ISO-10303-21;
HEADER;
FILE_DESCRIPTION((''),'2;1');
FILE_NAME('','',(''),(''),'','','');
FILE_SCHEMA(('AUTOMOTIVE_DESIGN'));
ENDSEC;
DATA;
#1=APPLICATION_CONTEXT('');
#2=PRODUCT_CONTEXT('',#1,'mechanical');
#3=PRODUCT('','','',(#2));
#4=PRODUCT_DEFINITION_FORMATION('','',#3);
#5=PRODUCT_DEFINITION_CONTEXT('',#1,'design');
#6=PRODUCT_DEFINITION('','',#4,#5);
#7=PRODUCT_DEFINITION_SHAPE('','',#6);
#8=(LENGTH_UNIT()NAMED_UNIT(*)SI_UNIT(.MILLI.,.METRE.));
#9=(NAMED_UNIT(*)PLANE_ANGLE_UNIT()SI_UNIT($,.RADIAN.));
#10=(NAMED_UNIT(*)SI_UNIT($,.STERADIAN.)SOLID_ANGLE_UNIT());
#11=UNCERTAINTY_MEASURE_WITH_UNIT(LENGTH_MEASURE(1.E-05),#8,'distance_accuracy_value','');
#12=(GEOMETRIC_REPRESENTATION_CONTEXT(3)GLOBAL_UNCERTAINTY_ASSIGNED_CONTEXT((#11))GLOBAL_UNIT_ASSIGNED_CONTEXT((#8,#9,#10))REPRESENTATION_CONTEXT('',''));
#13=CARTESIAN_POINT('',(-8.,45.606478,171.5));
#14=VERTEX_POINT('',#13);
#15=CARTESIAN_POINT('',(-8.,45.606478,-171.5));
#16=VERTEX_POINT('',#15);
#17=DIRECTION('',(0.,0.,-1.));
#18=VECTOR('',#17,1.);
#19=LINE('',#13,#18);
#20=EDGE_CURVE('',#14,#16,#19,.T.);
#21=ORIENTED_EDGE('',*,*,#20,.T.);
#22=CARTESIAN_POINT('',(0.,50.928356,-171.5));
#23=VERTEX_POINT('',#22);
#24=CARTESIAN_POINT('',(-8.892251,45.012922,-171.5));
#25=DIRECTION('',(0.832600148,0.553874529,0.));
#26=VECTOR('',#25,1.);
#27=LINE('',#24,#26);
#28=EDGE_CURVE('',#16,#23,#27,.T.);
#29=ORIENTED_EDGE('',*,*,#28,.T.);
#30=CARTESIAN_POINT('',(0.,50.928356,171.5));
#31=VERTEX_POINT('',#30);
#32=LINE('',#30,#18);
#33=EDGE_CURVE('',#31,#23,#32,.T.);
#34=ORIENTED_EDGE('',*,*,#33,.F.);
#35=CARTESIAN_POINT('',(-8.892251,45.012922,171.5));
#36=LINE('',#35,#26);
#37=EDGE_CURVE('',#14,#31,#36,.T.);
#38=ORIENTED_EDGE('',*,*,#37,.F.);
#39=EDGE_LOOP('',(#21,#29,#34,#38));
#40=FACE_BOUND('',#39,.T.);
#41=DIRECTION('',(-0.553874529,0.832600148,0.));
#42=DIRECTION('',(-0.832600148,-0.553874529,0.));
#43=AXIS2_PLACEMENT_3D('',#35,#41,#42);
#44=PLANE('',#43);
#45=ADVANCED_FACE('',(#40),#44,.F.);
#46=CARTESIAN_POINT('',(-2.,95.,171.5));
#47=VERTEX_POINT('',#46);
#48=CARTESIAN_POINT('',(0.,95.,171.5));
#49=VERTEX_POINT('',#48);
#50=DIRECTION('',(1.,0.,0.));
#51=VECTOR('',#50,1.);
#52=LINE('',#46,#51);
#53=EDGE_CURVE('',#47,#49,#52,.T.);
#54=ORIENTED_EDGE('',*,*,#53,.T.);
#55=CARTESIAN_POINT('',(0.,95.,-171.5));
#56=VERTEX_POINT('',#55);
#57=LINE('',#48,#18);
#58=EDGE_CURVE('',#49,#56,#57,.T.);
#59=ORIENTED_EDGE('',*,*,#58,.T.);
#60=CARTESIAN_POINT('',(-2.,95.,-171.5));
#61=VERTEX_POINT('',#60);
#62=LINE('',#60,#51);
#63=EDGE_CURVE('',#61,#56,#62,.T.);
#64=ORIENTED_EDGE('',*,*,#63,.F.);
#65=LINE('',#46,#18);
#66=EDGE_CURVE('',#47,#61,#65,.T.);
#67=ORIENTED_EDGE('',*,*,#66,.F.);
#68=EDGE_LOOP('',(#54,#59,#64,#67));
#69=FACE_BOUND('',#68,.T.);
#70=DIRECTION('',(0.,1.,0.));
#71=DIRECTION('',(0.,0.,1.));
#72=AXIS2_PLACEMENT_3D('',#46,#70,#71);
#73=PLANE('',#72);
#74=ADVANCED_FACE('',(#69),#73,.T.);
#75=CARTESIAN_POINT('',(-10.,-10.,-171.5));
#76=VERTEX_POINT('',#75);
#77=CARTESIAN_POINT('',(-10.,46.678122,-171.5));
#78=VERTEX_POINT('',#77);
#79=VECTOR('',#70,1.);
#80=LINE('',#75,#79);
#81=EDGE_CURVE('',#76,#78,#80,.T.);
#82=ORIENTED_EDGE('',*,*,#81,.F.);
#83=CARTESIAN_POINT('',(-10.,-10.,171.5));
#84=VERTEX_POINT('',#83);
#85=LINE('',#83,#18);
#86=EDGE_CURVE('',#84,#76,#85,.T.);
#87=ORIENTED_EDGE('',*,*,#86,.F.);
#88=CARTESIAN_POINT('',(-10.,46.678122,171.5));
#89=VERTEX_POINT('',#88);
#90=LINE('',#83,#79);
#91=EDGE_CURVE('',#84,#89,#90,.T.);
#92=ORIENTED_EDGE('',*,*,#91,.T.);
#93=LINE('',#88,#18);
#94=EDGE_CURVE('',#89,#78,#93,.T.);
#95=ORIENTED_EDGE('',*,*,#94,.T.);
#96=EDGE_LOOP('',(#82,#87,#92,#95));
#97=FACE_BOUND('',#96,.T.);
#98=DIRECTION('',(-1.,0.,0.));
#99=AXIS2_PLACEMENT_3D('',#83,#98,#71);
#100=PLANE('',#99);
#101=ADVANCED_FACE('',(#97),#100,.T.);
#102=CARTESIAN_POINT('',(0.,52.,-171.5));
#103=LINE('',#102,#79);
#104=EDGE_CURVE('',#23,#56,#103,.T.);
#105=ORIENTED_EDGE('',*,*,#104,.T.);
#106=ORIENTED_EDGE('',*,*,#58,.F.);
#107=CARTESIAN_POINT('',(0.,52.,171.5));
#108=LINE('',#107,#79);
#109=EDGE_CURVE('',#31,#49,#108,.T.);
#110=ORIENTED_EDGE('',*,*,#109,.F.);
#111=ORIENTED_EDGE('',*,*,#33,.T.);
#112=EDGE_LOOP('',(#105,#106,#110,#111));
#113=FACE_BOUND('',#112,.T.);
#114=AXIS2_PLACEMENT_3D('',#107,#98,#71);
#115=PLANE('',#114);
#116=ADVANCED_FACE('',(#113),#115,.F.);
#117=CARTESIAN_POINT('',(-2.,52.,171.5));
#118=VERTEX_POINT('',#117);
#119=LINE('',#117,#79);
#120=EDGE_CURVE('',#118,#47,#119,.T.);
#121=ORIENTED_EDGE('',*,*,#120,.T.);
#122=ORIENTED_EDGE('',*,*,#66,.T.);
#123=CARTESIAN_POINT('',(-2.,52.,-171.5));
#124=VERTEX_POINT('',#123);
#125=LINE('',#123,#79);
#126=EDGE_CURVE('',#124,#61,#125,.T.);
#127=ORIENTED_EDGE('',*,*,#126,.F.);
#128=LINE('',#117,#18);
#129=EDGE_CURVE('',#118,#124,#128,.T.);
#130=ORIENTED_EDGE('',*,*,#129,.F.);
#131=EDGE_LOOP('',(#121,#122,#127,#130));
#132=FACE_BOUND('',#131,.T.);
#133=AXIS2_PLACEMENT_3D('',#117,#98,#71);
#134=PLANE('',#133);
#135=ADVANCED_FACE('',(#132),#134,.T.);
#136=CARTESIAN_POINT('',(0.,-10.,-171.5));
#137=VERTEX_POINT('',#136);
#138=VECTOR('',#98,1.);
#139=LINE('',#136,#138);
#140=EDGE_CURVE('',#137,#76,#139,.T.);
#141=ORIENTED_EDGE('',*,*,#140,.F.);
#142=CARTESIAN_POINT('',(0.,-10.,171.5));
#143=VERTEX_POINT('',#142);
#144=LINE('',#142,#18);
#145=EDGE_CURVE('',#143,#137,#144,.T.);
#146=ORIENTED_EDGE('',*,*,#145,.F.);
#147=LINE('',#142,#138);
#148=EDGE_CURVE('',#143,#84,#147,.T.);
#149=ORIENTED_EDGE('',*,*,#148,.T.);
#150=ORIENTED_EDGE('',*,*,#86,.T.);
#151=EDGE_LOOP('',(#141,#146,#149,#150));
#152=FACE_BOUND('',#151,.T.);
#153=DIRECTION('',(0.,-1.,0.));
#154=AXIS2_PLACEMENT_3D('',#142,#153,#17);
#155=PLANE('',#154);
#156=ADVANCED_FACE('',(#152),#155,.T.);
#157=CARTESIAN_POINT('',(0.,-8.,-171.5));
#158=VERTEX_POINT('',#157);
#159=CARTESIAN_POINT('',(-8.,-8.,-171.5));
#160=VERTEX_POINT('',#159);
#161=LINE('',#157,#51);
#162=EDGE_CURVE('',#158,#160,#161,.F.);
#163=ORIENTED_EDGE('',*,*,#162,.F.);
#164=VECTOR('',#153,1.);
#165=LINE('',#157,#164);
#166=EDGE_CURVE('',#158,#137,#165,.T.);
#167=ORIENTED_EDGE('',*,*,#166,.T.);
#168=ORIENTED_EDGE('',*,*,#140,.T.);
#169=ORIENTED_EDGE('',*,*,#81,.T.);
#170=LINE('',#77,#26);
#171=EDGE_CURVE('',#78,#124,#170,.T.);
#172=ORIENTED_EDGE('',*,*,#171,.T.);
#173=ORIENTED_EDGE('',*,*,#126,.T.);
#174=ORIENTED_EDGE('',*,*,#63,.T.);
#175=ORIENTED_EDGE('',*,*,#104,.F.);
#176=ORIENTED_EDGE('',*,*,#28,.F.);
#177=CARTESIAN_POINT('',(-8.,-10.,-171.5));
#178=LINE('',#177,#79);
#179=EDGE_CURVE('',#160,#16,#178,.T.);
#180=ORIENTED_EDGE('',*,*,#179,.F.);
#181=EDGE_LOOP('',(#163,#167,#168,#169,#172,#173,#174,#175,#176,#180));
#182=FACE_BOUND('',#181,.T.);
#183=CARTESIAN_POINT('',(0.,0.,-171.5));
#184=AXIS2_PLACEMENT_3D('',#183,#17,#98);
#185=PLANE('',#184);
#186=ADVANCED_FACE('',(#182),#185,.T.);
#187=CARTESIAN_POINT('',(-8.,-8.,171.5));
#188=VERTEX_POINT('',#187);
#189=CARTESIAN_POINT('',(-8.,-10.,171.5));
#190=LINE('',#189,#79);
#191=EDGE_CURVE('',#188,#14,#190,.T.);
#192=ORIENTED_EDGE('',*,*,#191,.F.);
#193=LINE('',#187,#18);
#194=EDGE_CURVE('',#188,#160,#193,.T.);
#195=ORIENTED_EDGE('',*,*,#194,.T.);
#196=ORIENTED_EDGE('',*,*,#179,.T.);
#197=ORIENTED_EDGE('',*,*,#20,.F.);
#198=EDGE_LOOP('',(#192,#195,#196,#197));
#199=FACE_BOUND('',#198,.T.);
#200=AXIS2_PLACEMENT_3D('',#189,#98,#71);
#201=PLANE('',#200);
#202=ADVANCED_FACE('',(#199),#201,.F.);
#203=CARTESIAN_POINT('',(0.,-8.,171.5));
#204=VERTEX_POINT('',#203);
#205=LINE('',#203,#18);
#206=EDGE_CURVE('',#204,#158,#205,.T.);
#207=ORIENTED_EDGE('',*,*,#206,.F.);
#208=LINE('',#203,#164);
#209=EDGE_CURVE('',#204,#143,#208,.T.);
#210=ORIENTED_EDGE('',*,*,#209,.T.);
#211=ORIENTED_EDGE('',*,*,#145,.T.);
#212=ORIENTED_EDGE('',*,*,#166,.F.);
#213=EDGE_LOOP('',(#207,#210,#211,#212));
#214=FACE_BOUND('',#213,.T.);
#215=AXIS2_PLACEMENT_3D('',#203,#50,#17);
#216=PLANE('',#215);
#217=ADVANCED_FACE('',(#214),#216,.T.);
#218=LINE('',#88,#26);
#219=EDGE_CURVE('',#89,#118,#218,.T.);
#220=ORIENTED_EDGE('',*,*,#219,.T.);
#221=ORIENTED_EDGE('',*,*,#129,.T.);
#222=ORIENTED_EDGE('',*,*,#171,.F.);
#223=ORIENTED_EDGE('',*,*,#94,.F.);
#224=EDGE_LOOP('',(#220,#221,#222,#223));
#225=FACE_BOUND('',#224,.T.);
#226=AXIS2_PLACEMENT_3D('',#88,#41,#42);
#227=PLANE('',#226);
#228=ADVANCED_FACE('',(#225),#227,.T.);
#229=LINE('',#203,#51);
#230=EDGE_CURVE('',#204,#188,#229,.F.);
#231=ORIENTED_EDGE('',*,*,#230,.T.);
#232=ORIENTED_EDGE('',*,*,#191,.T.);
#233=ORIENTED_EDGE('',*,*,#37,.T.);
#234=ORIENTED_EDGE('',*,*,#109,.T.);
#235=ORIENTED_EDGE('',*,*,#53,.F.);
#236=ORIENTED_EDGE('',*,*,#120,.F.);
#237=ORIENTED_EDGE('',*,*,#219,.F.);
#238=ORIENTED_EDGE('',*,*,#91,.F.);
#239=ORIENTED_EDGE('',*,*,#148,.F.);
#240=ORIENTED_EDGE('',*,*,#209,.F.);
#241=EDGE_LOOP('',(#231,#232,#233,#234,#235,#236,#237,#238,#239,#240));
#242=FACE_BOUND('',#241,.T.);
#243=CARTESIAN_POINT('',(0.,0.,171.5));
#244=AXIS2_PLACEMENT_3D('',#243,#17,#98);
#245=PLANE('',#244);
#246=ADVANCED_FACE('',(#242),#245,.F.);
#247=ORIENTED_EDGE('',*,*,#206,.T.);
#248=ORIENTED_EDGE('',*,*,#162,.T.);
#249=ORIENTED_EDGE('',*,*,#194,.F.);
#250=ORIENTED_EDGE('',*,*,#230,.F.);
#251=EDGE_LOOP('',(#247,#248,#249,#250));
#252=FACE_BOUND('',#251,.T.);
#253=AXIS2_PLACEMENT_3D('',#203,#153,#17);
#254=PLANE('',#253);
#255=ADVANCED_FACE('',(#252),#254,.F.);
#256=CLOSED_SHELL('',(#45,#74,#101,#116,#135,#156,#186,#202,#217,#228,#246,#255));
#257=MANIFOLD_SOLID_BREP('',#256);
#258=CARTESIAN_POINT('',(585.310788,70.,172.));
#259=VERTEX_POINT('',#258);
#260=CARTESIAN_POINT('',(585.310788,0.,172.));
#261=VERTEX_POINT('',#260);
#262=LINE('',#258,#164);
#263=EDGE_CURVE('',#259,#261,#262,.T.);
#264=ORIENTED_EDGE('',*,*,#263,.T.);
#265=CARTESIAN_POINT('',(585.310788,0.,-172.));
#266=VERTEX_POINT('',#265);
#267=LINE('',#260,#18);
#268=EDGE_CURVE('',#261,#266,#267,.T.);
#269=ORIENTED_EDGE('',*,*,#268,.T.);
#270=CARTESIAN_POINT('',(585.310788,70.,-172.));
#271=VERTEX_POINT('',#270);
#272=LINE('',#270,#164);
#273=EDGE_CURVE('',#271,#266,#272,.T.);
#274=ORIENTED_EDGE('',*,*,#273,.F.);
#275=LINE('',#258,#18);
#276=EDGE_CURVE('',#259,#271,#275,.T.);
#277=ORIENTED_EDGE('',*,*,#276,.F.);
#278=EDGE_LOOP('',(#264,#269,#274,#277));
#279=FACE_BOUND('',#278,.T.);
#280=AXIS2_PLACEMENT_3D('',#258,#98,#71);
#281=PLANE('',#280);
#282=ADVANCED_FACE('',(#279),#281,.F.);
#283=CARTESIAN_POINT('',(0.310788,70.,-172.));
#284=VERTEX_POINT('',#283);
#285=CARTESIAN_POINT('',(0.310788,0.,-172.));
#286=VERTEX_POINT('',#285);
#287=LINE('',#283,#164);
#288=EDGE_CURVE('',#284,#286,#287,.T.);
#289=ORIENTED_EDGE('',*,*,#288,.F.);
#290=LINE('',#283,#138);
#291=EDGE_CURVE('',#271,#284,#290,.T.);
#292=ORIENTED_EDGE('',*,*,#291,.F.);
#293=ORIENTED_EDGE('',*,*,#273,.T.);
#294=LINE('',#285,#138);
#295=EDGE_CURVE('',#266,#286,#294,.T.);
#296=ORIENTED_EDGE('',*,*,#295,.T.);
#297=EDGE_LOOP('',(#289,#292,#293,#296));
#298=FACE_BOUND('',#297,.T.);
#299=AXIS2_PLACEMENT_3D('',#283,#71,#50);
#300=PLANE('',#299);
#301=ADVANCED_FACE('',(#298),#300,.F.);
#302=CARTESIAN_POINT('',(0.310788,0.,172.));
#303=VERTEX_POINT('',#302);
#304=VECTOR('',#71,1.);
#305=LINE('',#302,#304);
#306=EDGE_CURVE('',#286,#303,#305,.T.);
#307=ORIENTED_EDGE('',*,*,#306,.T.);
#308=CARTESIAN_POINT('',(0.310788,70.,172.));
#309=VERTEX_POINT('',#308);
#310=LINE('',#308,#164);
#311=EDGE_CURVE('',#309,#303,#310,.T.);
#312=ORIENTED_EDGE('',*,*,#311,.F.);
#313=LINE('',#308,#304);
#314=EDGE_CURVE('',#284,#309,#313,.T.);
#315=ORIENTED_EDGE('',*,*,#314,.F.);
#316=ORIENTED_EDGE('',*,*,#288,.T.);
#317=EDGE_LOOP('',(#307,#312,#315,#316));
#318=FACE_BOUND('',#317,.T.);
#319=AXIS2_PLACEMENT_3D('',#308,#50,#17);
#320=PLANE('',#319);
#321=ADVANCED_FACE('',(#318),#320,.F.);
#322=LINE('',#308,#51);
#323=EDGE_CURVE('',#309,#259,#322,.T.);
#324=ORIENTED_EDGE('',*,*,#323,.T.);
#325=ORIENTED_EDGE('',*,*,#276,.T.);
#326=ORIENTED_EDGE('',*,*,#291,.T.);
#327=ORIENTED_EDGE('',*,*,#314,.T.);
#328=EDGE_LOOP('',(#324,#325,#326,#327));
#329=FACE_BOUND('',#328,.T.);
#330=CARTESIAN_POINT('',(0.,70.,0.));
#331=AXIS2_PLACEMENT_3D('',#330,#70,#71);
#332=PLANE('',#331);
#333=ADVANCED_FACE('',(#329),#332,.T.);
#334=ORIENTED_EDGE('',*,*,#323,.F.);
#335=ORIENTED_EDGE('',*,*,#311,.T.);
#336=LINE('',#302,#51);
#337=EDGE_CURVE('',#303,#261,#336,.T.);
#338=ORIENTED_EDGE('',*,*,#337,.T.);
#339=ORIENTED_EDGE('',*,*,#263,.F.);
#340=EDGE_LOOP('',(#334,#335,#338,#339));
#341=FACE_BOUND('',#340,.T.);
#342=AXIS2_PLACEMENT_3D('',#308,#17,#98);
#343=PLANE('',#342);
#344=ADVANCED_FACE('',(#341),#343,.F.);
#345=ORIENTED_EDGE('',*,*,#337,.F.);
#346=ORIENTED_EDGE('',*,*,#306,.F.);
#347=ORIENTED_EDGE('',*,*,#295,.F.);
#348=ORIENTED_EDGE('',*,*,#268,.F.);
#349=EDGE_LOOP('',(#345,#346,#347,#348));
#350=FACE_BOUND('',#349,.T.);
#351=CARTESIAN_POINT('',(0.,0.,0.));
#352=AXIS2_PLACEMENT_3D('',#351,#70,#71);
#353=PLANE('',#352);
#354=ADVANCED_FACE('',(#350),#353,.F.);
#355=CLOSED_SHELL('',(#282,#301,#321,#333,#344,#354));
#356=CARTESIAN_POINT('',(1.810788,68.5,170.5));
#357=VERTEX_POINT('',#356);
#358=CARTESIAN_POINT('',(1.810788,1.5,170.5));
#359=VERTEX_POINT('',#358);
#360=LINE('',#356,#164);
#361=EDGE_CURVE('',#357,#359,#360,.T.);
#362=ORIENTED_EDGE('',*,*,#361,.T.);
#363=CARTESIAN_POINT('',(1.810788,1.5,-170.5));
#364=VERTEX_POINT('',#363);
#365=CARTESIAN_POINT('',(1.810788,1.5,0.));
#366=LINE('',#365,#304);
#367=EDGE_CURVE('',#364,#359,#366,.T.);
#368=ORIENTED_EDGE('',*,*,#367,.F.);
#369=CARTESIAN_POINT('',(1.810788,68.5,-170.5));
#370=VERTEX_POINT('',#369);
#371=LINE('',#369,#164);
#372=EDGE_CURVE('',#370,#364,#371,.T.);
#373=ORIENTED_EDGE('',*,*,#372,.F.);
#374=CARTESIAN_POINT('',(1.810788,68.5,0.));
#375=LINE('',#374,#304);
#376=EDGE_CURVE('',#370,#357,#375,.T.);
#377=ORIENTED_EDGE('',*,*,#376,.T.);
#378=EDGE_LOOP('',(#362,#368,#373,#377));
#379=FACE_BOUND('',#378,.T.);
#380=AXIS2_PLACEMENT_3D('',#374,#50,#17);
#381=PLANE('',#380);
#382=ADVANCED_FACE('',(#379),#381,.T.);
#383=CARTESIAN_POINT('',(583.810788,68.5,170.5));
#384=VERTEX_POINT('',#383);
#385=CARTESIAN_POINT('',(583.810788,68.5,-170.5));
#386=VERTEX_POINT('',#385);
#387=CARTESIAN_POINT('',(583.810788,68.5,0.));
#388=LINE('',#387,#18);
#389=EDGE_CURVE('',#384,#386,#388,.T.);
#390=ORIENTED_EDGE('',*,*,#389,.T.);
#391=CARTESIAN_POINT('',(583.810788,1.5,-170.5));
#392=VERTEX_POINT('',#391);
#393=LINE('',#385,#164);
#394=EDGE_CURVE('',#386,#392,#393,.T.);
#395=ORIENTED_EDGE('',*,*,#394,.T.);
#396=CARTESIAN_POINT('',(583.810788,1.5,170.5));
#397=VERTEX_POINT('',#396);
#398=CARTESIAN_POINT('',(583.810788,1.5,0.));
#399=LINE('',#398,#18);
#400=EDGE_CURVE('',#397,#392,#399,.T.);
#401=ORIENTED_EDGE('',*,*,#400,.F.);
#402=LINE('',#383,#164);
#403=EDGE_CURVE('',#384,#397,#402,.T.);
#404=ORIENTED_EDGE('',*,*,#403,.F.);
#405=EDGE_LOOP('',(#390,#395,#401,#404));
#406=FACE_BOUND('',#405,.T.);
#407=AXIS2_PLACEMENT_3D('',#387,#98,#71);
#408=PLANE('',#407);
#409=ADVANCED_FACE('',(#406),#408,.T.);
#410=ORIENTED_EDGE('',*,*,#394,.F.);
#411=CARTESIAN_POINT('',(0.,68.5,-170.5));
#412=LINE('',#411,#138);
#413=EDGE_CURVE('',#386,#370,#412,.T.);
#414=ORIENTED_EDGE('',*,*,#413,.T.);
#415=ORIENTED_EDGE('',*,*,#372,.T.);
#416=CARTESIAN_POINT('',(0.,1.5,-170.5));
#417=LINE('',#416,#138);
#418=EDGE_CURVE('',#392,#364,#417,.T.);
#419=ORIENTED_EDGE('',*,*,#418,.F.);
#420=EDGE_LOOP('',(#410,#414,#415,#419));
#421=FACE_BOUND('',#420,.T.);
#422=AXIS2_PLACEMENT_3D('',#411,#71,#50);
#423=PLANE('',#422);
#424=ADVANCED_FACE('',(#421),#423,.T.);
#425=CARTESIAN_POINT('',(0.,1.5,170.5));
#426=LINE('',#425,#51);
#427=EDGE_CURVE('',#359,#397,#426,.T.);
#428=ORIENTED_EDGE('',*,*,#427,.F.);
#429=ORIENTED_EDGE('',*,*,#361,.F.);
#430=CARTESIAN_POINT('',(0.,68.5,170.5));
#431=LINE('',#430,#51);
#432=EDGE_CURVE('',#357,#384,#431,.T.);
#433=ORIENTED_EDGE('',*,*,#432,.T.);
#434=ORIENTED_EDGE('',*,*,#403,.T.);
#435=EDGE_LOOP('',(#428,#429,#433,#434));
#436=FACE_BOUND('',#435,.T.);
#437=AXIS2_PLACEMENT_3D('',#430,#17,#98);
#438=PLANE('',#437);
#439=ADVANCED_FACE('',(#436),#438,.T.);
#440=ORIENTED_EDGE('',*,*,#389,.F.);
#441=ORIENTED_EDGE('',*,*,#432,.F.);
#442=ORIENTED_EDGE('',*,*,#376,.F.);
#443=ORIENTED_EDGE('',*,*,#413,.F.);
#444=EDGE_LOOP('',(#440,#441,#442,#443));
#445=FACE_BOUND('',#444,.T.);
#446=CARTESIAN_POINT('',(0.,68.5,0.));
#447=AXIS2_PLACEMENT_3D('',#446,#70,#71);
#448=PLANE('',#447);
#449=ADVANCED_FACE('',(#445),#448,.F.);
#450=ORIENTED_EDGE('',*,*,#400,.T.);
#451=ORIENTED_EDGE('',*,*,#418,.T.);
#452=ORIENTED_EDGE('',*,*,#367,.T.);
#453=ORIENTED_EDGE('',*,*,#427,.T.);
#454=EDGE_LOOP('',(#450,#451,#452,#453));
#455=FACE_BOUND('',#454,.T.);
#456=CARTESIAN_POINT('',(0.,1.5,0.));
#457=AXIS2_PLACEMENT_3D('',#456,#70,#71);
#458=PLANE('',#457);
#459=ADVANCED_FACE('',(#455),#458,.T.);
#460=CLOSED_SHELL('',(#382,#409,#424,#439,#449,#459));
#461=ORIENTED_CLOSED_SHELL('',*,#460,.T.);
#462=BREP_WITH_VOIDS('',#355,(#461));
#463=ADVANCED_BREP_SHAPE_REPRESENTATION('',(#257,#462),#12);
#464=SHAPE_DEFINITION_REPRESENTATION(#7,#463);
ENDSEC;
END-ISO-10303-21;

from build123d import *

# Parameters (mm, degrees)
EXTRUDE_1_OUTLINE_W     = 585
EXTRUDE_1_OUTLINE_H     = 344
EXTRUDE_1_DEPTH         = 1.5
EXTRUDE_START           = 68.5
EXTRUDE_1_2_OUTLINE_W   = 585
EXTRUDE_1_2_OUTLINE_H   = 344
EXTRUDE_1_2_DEPTH       = 1.5
EXTRUDE_START_2         = 1.5
EXTRUDE_1_3_OUTLINE_W   = 585
EXTRUDE_1_3_OUTLINE_H   = 344
EXTRUDE_1_3_OUTLINE_W_2 = 582
EXTRUDE_1_3_OUTLINE_H_2 = 341
EXTRUDE_1_3_DEPTH       = 67
EXTRUDE_2_DEPTH         = 171.5


# Read off the part's stored shape, not the designer's step: Вытянуть-Тонкостенный1
with BuildPart() as part:
    # Вытянуть-Тонкостенный1 outline → Вытянуть-Тонкостенный1 (new body)
    with BuildSketch(Plane(origin=(0, 0, 0), x_dir=(1, 0, 0), z_dir=(0, 1, 0))):
        with Locations((292.810788, 0)):
            Rectangle(EXTRUDE_1_OUTLINE_W, EXTRUDE_1_OUTLINE_H)
    extrude(amount=EXTRUDE_1_DEPTH)



with BuildPart() as body_2:
    # Extrude 1 2 outline → Extrude 1 2 (new body)
    with BuildSketch(Plane(origin=(0, 0, 0), x_dir=(1, 0, 0), z_dir=(0, 1, 0)).offset(EXTRUDE_START)):
        with Locations((292.810788, 0)):
            Rectangle(EXTRUDE_1_2_OUTLINE_W, EXTRUDE_1_2_OUTLINE_H)
    extrude(amount=EXTRUDE_1_2_DEPTH)


with BuildPart() as part_1:
    add(part.part)

    add(body_2.part)  # Extrude 1 3 merges body 2
    # Extrude 1 3 outline → Extrude 1 3 (add)
    with BuildSketch(Plane(origin=(0, 0, 0), x_dir=(1, 0, 0), z_dir=(0, 1, 0)).offset(EXTRUDE_START_2)):
        with Locations((292.810788, 0)):
            Rectangle(EXTRUDE_1_3_OUTLINE_W, EXTRUDE_1_3_OUTLINE_H)
        with Locations((292.810788, 0)):
            Rectangle(EXTRUDE_1_3_OUTLINE_W_2, EXTRUDE_1_3_OUTLINE_H_2, mode=Mode.SUBTRACT)
    extrude(amount=EXTRUDE_1_3_DEPTH)


with BuildPart() as body_2_2:
    # Эскиз2 → Вытянуть-Тонкостенный2 (new, symmetric)
    with BuildSketch(Plane.XY):
        Polygon((0, -10), (-10, -10), (-10, 46.678122215), (-2, 52), (-2, 95), (0, 95), (0, 50.928356013), (-8, 45.606478228), (-8, -8), (0, -8), align=None)
    extrude(amount=EXTRUDE_2_DEPTH, both=True)


solid = Compound([part_1.part, body_2_2.part])
